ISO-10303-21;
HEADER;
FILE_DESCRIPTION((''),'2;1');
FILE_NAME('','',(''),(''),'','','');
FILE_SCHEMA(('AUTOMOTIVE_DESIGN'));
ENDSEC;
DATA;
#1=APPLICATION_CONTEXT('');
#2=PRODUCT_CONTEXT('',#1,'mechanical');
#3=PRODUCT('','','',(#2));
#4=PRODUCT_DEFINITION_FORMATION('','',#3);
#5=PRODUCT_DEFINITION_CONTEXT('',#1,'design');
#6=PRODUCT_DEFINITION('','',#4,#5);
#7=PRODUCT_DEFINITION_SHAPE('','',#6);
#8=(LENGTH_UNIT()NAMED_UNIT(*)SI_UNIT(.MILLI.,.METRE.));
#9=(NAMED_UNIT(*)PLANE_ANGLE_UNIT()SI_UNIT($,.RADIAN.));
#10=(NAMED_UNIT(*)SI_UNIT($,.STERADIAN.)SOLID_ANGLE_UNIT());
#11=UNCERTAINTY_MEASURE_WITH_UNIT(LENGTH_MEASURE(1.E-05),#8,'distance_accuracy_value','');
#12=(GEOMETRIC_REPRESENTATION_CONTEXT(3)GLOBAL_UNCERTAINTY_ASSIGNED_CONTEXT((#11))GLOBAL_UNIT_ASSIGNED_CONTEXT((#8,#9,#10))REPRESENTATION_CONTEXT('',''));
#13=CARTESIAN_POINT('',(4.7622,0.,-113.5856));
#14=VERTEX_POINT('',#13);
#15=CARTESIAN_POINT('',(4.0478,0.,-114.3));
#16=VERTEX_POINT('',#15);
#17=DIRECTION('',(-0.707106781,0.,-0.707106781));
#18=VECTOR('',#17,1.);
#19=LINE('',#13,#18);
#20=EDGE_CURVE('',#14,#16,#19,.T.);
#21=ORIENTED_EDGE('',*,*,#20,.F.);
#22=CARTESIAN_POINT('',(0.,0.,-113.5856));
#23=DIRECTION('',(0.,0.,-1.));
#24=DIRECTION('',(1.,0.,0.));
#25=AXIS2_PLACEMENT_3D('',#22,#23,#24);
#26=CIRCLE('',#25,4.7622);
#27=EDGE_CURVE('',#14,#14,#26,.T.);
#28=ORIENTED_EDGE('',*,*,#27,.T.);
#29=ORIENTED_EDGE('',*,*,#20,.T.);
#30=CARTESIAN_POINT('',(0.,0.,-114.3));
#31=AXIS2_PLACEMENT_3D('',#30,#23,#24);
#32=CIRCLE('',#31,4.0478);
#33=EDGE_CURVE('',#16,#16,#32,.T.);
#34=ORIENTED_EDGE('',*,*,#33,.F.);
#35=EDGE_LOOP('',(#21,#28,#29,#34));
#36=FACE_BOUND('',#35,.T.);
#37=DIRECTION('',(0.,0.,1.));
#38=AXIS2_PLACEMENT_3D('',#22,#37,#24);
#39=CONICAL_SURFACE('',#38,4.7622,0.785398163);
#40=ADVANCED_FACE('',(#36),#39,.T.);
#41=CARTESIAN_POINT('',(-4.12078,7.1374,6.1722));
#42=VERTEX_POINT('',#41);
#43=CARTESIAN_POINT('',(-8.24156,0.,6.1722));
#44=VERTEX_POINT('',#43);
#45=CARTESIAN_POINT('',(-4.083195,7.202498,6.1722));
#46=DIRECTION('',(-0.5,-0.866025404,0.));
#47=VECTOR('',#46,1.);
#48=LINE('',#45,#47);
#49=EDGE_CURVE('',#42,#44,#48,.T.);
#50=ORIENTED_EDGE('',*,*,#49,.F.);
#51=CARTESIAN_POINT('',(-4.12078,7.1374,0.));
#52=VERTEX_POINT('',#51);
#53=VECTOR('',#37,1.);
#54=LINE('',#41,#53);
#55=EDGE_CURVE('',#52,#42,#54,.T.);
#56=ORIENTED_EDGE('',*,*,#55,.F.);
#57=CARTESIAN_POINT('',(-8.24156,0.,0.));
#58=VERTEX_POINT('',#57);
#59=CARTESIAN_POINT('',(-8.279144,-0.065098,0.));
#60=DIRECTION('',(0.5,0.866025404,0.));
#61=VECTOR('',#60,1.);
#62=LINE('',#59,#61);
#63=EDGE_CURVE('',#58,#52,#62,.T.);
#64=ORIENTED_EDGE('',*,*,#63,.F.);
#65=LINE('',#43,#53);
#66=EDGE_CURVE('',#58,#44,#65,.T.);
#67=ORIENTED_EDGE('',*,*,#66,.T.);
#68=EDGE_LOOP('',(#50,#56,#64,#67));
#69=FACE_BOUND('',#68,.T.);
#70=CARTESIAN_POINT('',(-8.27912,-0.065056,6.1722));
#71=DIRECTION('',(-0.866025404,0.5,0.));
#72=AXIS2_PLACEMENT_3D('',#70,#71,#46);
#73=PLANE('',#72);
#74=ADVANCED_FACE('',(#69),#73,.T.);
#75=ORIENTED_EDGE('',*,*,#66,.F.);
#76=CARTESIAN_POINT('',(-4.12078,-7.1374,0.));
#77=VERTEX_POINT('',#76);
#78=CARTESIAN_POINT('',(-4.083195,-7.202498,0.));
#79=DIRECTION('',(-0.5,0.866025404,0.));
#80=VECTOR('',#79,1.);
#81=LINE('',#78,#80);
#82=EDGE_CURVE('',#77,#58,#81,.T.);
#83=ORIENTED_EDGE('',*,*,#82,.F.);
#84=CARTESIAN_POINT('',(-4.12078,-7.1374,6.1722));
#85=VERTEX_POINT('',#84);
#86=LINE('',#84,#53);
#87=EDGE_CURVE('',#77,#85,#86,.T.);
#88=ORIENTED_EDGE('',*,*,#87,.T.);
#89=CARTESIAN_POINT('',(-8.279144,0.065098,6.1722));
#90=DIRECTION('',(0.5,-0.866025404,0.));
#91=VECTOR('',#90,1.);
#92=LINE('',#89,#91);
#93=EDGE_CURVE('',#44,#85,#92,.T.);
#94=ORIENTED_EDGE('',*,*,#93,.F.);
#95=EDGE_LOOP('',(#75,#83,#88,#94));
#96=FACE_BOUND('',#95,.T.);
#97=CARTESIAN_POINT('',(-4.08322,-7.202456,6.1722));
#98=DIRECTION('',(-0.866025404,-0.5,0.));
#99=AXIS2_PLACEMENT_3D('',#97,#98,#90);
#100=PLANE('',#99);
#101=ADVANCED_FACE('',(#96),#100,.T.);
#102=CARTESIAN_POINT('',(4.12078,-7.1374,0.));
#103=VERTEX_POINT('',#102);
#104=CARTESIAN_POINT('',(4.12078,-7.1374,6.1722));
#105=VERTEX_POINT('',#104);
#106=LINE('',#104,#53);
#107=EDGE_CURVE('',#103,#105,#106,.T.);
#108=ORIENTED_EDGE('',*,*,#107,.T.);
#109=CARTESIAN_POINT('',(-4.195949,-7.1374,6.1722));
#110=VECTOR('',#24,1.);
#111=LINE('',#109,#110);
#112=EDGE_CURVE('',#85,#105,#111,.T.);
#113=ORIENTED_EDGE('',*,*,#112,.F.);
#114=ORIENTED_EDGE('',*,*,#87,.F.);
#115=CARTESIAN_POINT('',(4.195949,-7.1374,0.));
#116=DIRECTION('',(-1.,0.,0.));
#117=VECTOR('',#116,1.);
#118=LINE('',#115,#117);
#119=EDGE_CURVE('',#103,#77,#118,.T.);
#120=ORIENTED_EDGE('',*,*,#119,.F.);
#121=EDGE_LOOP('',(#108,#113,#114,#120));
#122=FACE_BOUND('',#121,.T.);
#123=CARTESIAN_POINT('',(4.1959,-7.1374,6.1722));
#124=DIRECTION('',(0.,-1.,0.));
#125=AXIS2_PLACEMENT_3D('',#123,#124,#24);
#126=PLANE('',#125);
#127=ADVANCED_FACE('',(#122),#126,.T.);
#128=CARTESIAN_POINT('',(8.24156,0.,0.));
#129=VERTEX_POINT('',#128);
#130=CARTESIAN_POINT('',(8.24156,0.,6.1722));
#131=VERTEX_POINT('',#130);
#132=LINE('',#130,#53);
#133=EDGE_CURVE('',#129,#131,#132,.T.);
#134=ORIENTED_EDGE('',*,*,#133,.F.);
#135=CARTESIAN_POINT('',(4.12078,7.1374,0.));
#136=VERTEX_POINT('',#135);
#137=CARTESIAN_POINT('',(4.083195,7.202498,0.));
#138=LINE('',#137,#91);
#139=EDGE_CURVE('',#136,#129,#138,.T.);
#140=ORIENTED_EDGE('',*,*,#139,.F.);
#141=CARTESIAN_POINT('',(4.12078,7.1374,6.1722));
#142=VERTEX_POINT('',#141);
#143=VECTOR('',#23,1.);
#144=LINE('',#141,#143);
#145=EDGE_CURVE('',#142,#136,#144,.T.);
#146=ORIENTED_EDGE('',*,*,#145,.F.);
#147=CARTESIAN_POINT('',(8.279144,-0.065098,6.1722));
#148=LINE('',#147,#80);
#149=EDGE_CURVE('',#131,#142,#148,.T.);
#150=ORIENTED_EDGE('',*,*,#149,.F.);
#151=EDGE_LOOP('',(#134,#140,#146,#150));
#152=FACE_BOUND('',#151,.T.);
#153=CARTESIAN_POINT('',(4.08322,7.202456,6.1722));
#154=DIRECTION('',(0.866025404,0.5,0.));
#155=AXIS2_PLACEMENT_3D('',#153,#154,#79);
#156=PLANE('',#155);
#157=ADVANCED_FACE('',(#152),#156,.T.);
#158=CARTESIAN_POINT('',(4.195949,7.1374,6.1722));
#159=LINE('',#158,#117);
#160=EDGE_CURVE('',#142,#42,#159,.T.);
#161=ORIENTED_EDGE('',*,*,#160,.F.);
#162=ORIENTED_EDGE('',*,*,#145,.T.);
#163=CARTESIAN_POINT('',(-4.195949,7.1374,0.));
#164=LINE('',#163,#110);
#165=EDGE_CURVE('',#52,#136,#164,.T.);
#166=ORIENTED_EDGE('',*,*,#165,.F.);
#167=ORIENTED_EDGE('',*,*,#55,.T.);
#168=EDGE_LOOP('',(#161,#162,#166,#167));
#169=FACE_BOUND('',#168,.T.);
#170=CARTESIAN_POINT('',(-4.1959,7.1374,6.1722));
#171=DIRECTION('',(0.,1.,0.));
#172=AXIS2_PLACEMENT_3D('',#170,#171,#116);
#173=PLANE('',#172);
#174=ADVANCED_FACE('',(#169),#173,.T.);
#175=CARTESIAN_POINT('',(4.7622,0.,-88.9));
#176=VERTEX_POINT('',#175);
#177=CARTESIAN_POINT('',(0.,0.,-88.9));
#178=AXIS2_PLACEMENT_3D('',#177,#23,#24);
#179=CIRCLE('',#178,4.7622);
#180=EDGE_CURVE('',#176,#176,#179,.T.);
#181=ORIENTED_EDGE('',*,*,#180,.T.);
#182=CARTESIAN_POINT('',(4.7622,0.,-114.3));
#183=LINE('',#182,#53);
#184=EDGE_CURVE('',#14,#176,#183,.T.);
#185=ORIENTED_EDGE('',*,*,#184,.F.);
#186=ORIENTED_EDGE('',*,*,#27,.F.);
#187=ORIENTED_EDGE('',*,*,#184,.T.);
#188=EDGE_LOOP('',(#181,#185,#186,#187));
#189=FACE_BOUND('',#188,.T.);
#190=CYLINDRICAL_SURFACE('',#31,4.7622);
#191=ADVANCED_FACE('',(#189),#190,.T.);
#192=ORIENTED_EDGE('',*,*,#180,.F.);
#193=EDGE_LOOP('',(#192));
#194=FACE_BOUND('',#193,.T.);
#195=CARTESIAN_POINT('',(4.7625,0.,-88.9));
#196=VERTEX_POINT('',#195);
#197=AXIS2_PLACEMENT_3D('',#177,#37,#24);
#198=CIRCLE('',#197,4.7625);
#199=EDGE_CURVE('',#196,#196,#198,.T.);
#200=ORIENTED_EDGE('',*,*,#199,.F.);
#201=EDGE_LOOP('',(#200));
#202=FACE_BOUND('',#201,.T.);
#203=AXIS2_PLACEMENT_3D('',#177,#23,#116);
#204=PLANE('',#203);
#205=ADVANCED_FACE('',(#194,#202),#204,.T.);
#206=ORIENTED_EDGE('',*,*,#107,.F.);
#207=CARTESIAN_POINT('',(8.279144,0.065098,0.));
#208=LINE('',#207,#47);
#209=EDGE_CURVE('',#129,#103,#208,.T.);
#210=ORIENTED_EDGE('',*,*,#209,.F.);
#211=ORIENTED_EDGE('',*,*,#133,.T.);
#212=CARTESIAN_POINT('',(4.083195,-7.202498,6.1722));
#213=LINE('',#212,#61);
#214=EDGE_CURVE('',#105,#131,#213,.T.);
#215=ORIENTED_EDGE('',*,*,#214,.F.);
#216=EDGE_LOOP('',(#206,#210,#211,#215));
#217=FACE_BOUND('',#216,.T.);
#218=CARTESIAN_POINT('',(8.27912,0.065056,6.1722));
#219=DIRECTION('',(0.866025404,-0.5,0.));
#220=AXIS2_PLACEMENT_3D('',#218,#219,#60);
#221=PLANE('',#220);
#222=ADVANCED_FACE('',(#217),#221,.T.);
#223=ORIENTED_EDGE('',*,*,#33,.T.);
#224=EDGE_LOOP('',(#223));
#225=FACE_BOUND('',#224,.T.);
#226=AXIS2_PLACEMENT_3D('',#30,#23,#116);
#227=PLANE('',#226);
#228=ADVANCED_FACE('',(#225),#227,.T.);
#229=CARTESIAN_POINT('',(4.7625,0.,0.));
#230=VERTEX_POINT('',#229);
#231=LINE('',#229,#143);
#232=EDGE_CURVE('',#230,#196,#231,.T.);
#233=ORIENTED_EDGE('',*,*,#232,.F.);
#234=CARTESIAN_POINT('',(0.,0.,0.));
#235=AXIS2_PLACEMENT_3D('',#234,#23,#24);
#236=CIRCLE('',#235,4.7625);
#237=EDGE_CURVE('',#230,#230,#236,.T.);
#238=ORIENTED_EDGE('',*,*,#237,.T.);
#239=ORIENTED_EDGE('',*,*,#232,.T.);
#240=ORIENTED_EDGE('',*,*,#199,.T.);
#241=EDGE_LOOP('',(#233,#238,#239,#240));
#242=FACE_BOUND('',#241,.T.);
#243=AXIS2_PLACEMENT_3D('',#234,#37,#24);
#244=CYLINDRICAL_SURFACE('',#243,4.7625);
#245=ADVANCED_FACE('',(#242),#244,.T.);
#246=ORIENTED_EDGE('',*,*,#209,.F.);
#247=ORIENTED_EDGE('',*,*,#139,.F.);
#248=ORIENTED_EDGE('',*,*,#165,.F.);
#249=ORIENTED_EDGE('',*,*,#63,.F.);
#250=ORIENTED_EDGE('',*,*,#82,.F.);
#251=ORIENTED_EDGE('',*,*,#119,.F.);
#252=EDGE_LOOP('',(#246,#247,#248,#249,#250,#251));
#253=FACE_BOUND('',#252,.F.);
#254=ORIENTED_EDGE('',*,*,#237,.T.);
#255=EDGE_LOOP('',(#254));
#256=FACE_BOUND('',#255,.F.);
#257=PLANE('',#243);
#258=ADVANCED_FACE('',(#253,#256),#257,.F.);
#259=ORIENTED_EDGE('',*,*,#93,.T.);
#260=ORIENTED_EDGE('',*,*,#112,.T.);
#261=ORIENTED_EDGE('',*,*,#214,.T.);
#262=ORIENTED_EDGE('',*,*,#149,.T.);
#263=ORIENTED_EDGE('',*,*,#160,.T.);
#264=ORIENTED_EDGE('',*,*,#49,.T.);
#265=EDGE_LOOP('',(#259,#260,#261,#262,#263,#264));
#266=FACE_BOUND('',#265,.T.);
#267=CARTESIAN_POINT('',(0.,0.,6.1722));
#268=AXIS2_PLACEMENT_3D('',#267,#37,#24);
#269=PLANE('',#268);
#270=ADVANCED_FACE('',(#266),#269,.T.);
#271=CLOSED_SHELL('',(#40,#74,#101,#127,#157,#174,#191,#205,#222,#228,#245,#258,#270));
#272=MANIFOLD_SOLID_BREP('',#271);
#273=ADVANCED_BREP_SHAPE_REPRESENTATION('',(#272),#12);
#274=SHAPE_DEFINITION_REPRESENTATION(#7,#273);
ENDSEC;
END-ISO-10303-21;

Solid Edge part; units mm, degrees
sketch "Sketch1" plane through (0, 0, 0) normal (0, 0, 1) x (1, 0, 0)
  circle A0 centre (0, 0) radius 8.2794
  dimension "D1" = 16.5588
extrude "Protrusion1" add sketch "Sketch1" along normal blind 6.1722
sketch "Sketch2" plane through (0, 0, 0) normal (0, 0, -1) x (1, 0, 0)
  circle A0 centre (0, 0) radius 4.7625
extrude "Protrusion2" add sketch "Sketch2" along normal blind 114.3
sketch "Sketch3" plane through (0, 0, -114.3) normal (0, 0, -1) x (1, 0, 0)
  circle A0 centre (0, 0) radius 4.7622
extrude "Cutout1" cut sketch "Sketch3" against normal blind 25.4 flip side to cut
chamfer "Chamfer_1" distance 0.7144 angle 45 1 edges at (-4.7622, 0, -114.3)
sketch "Sketch4" plane through (0, 0, 6.1722) normal (0, 0, 1) x (1, 0, 0)
  line L0 (-4.1959, 7.1374) -> (4.1959, 7.1374)
  dimension "D1" = 14.2748
extrude "Cutout2" cut sketch "Sketch4" against normal up to next material side at (0, 7.1874, 6.1722)
pattern_circular "Pattern1" count 6 over 360 about axis through (0, 0, 6.1722) along (0, 0, 1) of "Cutout2"
properties part number "24103453"
